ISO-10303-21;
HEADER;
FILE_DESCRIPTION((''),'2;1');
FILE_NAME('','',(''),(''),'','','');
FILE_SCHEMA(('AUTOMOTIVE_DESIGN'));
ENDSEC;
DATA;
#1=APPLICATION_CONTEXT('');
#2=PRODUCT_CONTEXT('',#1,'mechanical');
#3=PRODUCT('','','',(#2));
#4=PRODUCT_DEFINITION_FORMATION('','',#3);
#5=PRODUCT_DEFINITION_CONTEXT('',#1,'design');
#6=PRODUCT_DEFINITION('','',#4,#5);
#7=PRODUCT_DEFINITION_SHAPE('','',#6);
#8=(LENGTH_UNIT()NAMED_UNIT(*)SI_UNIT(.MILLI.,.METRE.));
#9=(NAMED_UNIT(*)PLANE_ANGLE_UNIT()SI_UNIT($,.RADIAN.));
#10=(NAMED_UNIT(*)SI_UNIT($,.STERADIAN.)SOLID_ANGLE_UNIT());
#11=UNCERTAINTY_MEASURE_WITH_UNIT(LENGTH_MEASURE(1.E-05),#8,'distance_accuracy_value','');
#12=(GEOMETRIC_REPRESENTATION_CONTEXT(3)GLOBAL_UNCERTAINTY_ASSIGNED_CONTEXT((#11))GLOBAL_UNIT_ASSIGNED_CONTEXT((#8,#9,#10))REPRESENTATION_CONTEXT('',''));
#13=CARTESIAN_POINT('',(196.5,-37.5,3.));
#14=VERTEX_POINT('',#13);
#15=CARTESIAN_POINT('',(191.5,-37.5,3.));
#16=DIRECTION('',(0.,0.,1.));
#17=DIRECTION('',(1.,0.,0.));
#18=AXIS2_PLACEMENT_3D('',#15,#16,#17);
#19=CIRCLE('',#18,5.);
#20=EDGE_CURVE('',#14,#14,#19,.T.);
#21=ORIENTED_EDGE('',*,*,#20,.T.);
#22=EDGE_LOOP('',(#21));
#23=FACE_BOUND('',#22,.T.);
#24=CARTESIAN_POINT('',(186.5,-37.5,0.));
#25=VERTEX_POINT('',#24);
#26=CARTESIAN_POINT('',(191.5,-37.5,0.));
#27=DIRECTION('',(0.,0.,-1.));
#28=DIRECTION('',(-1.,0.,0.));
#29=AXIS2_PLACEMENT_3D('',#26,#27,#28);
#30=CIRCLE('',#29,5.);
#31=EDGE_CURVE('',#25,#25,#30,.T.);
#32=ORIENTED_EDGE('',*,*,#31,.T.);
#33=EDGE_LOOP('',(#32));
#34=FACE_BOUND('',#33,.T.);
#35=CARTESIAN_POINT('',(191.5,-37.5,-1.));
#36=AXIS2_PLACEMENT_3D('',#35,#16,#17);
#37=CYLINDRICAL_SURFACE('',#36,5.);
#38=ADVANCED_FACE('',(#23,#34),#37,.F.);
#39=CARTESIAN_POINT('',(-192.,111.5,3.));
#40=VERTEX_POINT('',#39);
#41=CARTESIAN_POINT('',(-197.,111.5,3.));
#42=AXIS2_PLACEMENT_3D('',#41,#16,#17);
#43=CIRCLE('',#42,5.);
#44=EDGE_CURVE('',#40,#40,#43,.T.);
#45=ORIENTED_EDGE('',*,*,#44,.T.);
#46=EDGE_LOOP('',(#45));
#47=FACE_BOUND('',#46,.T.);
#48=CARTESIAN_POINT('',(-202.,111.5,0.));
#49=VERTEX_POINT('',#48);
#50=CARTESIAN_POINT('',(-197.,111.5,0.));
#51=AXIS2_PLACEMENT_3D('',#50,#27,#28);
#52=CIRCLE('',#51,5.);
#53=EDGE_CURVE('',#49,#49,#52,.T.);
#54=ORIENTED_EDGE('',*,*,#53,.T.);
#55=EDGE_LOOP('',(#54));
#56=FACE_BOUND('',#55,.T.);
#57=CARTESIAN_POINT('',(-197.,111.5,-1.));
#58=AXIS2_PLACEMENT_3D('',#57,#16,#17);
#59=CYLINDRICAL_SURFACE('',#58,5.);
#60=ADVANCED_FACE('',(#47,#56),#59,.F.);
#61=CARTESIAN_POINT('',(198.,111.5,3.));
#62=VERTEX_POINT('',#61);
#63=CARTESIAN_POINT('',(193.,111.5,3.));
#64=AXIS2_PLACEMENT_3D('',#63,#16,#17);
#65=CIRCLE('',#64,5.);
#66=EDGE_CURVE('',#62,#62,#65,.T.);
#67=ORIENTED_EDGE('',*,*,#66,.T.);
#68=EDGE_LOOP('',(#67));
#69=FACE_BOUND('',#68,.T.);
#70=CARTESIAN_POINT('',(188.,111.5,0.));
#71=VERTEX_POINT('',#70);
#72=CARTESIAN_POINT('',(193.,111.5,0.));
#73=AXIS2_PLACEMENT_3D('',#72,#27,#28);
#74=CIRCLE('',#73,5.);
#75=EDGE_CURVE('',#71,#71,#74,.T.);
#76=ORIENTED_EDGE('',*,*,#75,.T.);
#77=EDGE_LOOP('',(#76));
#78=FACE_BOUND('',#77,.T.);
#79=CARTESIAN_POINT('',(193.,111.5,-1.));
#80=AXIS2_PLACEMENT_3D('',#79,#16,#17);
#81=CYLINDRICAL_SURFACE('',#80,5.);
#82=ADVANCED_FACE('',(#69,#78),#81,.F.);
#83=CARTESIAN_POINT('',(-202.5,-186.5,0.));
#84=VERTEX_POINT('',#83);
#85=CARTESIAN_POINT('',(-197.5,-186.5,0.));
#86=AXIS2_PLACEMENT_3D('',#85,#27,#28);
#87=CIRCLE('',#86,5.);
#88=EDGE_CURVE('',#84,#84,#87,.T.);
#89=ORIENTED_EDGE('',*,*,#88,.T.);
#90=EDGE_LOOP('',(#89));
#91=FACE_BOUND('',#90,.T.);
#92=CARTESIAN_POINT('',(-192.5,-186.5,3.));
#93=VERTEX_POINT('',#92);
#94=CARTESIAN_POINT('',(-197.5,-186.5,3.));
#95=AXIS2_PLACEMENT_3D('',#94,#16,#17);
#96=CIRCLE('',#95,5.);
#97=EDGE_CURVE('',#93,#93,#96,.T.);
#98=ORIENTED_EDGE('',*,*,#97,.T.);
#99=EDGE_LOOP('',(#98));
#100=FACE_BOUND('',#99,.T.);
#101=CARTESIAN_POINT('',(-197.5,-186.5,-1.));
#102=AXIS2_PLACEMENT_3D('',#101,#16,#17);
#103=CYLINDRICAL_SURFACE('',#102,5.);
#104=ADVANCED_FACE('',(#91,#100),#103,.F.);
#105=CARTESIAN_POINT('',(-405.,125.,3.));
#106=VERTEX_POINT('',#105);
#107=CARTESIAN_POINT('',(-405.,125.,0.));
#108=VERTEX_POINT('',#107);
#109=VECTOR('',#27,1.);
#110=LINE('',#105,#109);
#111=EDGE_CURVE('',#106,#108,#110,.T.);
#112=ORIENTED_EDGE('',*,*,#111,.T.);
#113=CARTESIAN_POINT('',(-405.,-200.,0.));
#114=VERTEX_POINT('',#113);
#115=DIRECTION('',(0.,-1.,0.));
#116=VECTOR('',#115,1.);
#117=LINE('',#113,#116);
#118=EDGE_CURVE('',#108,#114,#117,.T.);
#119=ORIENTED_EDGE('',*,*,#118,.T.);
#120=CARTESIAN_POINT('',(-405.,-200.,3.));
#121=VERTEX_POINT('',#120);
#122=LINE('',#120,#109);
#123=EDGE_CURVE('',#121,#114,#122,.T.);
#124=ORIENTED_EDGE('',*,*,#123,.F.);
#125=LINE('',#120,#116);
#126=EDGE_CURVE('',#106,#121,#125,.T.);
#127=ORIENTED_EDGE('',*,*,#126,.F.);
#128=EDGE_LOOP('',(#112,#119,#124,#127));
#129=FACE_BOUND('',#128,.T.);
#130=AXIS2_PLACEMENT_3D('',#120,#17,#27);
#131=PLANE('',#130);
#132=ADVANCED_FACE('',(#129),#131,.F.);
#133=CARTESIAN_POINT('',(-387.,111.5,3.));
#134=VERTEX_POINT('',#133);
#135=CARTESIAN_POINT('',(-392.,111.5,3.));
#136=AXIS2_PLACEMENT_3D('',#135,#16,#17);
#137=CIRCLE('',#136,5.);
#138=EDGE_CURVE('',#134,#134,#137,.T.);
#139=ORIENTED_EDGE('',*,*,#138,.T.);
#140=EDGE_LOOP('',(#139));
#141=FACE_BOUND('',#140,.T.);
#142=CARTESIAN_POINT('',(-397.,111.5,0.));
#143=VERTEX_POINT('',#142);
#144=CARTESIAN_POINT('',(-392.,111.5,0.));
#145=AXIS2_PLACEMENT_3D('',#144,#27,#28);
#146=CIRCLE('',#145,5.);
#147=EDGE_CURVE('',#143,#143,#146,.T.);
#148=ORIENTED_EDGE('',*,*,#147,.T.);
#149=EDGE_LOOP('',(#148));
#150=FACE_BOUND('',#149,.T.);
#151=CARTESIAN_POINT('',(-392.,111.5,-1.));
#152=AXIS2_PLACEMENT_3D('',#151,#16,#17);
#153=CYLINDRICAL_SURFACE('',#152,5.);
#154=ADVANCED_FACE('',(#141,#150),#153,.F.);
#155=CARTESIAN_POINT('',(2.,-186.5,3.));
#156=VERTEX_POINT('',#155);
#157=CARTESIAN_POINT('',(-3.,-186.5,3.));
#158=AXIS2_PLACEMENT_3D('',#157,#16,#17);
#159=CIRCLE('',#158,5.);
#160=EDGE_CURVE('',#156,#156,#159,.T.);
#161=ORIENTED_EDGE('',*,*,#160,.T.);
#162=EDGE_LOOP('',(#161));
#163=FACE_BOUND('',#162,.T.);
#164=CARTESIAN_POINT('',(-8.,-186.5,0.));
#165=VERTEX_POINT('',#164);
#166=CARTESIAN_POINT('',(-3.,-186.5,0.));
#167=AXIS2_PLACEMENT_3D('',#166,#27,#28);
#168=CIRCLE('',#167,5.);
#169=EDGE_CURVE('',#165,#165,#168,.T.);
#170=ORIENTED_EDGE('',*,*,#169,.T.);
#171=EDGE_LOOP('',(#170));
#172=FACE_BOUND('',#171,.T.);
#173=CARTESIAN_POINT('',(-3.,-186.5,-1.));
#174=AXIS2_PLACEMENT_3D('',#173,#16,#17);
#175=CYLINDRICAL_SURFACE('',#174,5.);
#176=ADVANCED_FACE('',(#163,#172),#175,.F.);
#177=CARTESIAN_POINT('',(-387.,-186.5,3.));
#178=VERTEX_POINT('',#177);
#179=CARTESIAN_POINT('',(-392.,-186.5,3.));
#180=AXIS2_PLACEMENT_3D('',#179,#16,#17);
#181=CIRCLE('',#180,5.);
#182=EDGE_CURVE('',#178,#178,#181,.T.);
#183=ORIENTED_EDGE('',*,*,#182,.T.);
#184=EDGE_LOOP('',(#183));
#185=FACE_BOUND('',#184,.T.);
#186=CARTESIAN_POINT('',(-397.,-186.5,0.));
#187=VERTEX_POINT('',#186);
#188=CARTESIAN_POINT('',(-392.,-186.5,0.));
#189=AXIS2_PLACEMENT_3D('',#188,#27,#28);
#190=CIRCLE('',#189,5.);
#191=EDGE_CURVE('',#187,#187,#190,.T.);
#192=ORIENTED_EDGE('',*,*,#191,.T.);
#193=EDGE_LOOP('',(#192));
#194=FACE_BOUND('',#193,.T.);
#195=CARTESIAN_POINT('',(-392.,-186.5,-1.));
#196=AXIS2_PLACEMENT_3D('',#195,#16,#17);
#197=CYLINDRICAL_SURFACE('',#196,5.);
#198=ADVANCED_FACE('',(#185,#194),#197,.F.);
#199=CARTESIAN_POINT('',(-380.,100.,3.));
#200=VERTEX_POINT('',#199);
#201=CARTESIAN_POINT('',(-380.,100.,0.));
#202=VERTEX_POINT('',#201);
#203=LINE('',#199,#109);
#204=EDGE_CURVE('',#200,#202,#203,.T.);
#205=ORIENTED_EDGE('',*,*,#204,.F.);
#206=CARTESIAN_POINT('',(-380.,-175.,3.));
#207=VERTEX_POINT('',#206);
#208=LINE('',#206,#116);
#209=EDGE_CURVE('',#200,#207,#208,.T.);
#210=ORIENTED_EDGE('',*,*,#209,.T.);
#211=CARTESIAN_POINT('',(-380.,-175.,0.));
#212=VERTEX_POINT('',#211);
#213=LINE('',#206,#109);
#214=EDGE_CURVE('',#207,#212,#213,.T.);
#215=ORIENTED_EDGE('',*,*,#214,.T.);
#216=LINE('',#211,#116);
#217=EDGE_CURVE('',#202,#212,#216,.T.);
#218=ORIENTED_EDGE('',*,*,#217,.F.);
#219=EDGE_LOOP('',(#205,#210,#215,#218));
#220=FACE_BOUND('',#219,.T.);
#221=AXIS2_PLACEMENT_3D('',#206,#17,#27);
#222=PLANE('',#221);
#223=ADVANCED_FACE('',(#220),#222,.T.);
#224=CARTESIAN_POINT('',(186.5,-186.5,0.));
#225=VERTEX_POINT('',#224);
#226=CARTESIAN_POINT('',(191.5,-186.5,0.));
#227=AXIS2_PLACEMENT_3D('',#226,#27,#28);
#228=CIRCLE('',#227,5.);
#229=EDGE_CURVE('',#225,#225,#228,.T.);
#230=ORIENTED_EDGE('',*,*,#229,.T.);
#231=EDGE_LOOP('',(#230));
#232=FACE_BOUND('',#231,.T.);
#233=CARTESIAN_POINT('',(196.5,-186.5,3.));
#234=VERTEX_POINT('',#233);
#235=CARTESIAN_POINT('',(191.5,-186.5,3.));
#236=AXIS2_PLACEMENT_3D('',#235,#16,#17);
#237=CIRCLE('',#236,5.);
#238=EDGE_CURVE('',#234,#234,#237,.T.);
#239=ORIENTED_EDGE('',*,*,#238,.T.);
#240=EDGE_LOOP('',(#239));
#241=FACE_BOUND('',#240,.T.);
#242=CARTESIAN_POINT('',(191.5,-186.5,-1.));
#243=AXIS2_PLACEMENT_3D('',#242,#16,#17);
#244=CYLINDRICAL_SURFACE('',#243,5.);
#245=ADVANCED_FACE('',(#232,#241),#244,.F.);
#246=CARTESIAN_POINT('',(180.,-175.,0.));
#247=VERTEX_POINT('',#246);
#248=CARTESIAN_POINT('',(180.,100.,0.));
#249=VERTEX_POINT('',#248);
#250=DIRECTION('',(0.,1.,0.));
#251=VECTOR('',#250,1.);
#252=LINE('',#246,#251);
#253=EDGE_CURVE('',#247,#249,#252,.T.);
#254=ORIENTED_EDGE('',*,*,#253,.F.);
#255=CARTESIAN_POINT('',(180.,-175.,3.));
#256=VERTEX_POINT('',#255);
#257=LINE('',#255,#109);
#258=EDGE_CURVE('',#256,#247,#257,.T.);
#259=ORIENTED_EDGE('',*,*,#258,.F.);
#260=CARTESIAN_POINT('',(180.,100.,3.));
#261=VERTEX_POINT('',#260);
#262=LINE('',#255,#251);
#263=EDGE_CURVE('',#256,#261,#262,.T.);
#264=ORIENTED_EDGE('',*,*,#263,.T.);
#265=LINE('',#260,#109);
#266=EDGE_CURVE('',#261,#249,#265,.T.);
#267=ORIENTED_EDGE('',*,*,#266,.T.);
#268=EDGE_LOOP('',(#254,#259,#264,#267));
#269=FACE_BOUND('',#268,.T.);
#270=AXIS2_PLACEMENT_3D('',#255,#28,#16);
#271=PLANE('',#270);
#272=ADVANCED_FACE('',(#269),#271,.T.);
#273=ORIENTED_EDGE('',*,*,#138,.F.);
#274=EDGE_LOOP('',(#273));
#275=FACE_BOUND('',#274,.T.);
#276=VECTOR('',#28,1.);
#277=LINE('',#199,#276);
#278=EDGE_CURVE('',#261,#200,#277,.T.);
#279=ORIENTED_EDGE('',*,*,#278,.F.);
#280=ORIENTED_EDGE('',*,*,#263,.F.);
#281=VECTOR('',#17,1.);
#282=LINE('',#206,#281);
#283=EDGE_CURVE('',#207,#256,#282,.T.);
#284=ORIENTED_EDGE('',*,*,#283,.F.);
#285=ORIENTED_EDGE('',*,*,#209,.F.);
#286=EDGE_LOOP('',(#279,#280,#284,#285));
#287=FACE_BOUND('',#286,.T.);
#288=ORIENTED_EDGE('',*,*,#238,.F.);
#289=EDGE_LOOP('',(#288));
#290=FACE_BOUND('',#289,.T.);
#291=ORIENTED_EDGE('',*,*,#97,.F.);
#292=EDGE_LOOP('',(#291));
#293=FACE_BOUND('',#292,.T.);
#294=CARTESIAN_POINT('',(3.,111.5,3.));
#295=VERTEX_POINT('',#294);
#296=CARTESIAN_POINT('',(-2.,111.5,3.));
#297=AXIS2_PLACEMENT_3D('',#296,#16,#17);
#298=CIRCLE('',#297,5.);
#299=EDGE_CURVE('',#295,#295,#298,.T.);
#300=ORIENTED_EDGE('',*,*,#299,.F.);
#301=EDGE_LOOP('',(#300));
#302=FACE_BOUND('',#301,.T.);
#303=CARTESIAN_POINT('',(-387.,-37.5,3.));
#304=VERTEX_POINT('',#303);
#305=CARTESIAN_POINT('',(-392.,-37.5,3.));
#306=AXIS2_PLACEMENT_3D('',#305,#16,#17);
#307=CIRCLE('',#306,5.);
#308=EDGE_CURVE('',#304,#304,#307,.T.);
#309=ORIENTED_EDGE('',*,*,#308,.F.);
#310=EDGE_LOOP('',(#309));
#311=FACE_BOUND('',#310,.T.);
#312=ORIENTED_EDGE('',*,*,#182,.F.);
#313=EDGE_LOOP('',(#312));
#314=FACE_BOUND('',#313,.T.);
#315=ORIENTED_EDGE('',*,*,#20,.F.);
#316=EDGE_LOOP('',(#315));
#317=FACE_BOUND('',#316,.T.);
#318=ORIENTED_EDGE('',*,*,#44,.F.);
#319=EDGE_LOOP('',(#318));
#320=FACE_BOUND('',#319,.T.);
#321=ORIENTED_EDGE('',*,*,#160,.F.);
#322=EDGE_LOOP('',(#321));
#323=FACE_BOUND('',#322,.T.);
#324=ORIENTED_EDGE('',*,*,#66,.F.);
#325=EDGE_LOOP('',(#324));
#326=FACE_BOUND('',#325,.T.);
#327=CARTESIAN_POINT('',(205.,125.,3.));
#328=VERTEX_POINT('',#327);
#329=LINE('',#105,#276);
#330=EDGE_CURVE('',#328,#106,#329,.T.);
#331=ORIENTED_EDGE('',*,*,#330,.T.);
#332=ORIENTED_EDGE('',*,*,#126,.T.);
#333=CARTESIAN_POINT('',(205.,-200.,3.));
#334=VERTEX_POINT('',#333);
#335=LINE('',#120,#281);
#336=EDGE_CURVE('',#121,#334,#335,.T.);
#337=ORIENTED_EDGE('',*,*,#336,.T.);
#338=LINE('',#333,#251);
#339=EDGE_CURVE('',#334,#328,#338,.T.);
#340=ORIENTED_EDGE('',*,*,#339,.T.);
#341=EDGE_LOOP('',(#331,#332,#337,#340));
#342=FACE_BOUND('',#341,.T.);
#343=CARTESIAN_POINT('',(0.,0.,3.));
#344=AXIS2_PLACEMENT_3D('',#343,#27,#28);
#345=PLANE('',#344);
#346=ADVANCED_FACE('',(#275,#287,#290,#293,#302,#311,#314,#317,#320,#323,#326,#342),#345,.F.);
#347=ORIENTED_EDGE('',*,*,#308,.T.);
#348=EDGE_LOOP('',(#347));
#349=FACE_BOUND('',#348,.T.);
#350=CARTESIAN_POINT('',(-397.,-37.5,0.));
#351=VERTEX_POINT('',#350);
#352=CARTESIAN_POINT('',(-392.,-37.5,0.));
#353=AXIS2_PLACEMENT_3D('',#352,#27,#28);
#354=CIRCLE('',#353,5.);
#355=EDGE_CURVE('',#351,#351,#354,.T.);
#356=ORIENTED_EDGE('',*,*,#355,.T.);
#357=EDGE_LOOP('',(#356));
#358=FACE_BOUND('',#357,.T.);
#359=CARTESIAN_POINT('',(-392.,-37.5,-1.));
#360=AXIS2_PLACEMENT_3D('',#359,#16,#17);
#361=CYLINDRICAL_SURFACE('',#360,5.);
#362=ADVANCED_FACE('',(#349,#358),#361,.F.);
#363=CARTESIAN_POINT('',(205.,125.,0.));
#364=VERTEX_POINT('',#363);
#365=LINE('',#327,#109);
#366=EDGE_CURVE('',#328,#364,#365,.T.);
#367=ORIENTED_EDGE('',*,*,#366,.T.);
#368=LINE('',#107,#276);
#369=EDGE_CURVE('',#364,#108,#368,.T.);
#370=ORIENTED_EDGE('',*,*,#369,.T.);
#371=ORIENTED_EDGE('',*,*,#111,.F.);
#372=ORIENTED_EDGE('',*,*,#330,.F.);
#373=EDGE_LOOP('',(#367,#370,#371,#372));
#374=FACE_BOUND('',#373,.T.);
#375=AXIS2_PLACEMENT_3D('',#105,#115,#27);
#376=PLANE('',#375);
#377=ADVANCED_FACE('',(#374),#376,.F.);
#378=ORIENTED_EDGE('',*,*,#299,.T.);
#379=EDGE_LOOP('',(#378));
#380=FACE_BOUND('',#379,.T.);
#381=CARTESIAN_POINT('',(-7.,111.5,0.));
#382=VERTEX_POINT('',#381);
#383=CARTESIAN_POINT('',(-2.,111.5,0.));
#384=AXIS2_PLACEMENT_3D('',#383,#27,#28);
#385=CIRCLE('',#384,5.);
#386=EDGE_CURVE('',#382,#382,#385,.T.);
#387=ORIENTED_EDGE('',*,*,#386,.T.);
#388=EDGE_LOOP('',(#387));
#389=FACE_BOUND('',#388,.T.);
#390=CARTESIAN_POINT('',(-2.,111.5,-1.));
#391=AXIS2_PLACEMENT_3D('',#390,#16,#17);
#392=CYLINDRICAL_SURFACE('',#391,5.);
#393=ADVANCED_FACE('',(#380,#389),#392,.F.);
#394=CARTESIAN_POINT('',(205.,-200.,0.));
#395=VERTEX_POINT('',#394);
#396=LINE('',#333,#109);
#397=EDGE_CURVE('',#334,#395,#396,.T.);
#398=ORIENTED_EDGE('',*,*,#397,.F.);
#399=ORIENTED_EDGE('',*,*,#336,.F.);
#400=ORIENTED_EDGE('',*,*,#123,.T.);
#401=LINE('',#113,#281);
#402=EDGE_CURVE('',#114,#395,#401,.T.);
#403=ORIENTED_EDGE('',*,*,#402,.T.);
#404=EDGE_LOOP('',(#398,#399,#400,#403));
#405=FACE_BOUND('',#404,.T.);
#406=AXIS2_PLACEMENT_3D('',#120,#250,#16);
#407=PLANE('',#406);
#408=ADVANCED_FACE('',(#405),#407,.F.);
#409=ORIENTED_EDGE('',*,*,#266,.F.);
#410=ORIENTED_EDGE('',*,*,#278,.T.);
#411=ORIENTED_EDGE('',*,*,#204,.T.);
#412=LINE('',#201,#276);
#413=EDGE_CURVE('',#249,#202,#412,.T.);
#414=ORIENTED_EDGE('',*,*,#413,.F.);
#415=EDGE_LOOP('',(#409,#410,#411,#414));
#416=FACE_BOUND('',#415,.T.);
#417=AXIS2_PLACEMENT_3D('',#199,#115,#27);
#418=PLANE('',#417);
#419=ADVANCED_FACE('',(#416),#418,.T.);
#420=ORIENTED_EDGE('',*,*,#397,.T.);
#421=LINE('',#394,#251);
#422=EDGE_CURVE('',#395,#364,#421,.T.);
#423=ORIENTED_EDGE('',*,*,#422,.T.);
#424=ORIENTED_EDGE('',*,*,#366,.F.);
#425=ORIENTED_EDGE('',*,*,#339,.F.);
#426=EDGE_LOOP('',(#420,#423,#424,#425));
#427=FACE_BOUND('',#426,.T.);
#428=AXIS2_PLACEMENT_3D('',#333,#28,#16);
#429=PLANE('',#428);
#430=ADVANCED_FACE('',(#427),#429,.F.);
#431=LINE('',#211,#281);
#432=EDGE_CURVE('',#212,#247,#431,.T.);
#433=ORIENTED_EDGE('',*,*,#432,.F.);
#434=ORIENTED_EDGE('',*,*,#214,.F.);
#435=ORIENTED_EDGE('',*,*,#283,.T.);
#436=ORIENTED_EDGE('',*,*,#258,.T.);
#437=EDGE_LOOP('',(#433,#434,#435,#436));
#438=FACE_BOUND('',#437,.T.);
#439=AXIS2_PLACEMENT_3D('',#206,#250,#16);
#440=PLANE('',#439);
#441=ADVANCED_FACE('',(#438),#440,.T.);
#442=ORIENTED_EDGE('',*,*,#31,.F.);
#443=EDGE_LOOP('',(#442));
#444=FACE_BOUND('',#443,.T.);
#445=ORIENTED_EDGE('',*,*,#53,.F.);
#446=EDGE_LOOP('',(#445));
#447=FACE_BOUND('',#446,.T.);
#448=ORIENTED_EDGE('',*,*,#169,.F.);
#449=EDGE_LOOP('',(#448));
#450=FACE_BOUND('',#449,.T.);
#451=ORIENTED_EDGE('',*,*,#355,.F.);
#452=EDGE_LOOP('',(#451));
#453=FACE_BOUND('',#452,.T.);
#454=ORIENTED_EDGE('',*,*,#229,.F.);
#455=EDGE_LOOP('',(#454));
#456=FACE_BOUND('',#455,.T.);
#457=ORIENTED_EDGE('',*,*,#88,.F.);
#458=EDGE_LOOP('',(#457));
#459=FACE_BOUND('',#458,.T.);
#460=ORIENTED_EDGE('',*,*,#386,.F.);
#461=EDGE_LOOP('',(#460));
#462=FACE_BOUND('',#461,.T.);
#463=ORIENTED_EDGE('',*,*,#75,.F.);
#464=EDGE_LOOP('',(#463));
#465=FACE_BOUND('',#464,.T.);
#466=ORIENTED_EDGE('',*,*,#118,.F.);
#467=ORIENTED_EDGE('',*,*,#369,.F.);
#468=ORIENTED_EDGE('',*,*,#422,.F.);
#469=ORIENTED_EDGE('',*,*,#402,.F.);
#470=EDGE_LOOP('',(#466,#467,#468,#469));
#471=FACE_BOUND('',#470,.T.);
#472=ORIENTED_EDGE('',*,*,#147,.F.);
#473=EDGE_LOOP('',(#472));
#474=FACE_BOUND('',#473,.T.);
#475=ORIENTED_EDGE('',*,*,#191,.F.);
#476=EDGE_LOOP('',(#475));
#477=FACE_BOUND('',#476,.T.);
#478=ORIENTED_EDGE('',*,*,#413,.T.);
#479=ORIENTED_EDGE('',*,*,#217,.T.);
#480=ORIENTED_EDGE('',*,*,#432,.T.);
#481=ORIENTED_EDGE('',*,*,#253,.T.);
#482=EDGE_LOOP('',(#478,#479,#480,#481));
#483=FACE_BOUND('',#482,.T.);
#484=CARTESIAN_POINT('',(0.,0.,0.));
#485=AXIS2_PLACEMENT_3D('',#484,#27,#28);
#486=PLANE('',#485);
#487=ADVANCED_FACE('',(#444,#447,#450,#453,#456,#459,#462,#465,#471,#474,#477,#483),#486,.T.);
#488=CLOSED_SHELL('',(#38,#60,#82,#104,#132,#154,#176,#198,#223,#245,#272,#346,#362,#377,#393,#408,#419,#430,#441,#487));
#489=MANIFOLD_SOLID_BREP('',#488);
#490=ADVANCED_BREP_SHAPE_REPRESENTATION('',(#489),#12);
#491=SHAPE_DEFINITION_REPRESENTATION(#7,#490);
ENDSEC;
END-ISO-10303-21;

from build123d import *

# Parameters (mm, degrees)
SKETCH1_W           = 610
SKETCH1_H           = 325
SKETCH1_W_2         = 560
SKETCH1_H_2         = 275
BOSS_EXTRUDE1_DEPTH = 3
SKETCH2_R           = 5
CUT_EXTRUDE1_DEPTH  = 4
LPATTERN1_COUNT     = 4
LPATTERN1_PITCH     = 195
LPATTERN2_COUNT     = 3
LPATTERN2_PITCH     = 149
LPATTERN3_OUTLINE_R = 5
LPATTERN3_DEPTH     = 3
LPATTERN4_OUTLINE_R = 5
LPATTERN4_DEPTH     = 3


# Read off the part's stored shape, not the designer's step: LPattern3, LPattern4
with BuildPart() as part:
    # Sketch1 → Boss-Extrude1 (new body)
    with BuildSketch(Plane.XY):
        with Locations((-100, -37.5)):
            Rectangle(SKETCH1_W, SKETCH1_H)
        with Locations((-100, -37.5)):
            Rectangle(SKETCH1_W_2, SKETCH1_H_2, mode=Mode.SUBTRACT)
    extrude(amount=BOSS_EXTRUDE1_DEPTH)

    # Sketch2 → Cut-Extrude1 (cut)
    with BuildSketch(Plane.XY.offset(3)):
        with Locations((-392, 111.5)):
            Circle(SKETCH2_R)
    cut_extrude1 = extrude(amount=-CUT_EXTRUDE1_DEPTH, mode=Mode.SUBTRACT)

    # LPattern1: Cut-Extrude1 ×4
    with Locations(*[(i * LPATTERN1_PITCH, 0, 0) for i in range(1, LPATTERN1_COUNT)]):
        add(cut_extrude1, mode=Mode.SUBTRACT)

    # LPattern2: Cut-Extrude1 ×3
    with Locations(*[(0, -i * LPATTERN2_PITCH, 0) for i in range(1, LPATTERN2_COUNT)]):
        add(cut_extrude1, mode=Mode.SUBTRACT)

    # LPattern3 outline → LPattern3 (cut)
    with BuildSketch(Plane.XY):
        with Locations((191.5, -186.5)):
            Circle(LPATTERN3_OUTLINE_R)
        with Locations((-3, -186.5)):
            Circle(LPATTERN3_OUTLINE_R)
        with Locations((-197.5, -186.5)):
            Circle(LPATTERN3_OUTLINE_R)
    extrude(amount=LPATTERN3_DEPTH, mode=Mode.SUBTRACT)

    # LPattern4 outline → LPattern4 (cut)
    with BuildSketch(Plane.XY):
        with Locations((191.5, -37.5)):
            Circle(LPATTERN4_OUTLINE_R)
    extrude(amount=LPATTERN4_DEPTH, mode=Mode.SUBTRACT)


solid = part.part
